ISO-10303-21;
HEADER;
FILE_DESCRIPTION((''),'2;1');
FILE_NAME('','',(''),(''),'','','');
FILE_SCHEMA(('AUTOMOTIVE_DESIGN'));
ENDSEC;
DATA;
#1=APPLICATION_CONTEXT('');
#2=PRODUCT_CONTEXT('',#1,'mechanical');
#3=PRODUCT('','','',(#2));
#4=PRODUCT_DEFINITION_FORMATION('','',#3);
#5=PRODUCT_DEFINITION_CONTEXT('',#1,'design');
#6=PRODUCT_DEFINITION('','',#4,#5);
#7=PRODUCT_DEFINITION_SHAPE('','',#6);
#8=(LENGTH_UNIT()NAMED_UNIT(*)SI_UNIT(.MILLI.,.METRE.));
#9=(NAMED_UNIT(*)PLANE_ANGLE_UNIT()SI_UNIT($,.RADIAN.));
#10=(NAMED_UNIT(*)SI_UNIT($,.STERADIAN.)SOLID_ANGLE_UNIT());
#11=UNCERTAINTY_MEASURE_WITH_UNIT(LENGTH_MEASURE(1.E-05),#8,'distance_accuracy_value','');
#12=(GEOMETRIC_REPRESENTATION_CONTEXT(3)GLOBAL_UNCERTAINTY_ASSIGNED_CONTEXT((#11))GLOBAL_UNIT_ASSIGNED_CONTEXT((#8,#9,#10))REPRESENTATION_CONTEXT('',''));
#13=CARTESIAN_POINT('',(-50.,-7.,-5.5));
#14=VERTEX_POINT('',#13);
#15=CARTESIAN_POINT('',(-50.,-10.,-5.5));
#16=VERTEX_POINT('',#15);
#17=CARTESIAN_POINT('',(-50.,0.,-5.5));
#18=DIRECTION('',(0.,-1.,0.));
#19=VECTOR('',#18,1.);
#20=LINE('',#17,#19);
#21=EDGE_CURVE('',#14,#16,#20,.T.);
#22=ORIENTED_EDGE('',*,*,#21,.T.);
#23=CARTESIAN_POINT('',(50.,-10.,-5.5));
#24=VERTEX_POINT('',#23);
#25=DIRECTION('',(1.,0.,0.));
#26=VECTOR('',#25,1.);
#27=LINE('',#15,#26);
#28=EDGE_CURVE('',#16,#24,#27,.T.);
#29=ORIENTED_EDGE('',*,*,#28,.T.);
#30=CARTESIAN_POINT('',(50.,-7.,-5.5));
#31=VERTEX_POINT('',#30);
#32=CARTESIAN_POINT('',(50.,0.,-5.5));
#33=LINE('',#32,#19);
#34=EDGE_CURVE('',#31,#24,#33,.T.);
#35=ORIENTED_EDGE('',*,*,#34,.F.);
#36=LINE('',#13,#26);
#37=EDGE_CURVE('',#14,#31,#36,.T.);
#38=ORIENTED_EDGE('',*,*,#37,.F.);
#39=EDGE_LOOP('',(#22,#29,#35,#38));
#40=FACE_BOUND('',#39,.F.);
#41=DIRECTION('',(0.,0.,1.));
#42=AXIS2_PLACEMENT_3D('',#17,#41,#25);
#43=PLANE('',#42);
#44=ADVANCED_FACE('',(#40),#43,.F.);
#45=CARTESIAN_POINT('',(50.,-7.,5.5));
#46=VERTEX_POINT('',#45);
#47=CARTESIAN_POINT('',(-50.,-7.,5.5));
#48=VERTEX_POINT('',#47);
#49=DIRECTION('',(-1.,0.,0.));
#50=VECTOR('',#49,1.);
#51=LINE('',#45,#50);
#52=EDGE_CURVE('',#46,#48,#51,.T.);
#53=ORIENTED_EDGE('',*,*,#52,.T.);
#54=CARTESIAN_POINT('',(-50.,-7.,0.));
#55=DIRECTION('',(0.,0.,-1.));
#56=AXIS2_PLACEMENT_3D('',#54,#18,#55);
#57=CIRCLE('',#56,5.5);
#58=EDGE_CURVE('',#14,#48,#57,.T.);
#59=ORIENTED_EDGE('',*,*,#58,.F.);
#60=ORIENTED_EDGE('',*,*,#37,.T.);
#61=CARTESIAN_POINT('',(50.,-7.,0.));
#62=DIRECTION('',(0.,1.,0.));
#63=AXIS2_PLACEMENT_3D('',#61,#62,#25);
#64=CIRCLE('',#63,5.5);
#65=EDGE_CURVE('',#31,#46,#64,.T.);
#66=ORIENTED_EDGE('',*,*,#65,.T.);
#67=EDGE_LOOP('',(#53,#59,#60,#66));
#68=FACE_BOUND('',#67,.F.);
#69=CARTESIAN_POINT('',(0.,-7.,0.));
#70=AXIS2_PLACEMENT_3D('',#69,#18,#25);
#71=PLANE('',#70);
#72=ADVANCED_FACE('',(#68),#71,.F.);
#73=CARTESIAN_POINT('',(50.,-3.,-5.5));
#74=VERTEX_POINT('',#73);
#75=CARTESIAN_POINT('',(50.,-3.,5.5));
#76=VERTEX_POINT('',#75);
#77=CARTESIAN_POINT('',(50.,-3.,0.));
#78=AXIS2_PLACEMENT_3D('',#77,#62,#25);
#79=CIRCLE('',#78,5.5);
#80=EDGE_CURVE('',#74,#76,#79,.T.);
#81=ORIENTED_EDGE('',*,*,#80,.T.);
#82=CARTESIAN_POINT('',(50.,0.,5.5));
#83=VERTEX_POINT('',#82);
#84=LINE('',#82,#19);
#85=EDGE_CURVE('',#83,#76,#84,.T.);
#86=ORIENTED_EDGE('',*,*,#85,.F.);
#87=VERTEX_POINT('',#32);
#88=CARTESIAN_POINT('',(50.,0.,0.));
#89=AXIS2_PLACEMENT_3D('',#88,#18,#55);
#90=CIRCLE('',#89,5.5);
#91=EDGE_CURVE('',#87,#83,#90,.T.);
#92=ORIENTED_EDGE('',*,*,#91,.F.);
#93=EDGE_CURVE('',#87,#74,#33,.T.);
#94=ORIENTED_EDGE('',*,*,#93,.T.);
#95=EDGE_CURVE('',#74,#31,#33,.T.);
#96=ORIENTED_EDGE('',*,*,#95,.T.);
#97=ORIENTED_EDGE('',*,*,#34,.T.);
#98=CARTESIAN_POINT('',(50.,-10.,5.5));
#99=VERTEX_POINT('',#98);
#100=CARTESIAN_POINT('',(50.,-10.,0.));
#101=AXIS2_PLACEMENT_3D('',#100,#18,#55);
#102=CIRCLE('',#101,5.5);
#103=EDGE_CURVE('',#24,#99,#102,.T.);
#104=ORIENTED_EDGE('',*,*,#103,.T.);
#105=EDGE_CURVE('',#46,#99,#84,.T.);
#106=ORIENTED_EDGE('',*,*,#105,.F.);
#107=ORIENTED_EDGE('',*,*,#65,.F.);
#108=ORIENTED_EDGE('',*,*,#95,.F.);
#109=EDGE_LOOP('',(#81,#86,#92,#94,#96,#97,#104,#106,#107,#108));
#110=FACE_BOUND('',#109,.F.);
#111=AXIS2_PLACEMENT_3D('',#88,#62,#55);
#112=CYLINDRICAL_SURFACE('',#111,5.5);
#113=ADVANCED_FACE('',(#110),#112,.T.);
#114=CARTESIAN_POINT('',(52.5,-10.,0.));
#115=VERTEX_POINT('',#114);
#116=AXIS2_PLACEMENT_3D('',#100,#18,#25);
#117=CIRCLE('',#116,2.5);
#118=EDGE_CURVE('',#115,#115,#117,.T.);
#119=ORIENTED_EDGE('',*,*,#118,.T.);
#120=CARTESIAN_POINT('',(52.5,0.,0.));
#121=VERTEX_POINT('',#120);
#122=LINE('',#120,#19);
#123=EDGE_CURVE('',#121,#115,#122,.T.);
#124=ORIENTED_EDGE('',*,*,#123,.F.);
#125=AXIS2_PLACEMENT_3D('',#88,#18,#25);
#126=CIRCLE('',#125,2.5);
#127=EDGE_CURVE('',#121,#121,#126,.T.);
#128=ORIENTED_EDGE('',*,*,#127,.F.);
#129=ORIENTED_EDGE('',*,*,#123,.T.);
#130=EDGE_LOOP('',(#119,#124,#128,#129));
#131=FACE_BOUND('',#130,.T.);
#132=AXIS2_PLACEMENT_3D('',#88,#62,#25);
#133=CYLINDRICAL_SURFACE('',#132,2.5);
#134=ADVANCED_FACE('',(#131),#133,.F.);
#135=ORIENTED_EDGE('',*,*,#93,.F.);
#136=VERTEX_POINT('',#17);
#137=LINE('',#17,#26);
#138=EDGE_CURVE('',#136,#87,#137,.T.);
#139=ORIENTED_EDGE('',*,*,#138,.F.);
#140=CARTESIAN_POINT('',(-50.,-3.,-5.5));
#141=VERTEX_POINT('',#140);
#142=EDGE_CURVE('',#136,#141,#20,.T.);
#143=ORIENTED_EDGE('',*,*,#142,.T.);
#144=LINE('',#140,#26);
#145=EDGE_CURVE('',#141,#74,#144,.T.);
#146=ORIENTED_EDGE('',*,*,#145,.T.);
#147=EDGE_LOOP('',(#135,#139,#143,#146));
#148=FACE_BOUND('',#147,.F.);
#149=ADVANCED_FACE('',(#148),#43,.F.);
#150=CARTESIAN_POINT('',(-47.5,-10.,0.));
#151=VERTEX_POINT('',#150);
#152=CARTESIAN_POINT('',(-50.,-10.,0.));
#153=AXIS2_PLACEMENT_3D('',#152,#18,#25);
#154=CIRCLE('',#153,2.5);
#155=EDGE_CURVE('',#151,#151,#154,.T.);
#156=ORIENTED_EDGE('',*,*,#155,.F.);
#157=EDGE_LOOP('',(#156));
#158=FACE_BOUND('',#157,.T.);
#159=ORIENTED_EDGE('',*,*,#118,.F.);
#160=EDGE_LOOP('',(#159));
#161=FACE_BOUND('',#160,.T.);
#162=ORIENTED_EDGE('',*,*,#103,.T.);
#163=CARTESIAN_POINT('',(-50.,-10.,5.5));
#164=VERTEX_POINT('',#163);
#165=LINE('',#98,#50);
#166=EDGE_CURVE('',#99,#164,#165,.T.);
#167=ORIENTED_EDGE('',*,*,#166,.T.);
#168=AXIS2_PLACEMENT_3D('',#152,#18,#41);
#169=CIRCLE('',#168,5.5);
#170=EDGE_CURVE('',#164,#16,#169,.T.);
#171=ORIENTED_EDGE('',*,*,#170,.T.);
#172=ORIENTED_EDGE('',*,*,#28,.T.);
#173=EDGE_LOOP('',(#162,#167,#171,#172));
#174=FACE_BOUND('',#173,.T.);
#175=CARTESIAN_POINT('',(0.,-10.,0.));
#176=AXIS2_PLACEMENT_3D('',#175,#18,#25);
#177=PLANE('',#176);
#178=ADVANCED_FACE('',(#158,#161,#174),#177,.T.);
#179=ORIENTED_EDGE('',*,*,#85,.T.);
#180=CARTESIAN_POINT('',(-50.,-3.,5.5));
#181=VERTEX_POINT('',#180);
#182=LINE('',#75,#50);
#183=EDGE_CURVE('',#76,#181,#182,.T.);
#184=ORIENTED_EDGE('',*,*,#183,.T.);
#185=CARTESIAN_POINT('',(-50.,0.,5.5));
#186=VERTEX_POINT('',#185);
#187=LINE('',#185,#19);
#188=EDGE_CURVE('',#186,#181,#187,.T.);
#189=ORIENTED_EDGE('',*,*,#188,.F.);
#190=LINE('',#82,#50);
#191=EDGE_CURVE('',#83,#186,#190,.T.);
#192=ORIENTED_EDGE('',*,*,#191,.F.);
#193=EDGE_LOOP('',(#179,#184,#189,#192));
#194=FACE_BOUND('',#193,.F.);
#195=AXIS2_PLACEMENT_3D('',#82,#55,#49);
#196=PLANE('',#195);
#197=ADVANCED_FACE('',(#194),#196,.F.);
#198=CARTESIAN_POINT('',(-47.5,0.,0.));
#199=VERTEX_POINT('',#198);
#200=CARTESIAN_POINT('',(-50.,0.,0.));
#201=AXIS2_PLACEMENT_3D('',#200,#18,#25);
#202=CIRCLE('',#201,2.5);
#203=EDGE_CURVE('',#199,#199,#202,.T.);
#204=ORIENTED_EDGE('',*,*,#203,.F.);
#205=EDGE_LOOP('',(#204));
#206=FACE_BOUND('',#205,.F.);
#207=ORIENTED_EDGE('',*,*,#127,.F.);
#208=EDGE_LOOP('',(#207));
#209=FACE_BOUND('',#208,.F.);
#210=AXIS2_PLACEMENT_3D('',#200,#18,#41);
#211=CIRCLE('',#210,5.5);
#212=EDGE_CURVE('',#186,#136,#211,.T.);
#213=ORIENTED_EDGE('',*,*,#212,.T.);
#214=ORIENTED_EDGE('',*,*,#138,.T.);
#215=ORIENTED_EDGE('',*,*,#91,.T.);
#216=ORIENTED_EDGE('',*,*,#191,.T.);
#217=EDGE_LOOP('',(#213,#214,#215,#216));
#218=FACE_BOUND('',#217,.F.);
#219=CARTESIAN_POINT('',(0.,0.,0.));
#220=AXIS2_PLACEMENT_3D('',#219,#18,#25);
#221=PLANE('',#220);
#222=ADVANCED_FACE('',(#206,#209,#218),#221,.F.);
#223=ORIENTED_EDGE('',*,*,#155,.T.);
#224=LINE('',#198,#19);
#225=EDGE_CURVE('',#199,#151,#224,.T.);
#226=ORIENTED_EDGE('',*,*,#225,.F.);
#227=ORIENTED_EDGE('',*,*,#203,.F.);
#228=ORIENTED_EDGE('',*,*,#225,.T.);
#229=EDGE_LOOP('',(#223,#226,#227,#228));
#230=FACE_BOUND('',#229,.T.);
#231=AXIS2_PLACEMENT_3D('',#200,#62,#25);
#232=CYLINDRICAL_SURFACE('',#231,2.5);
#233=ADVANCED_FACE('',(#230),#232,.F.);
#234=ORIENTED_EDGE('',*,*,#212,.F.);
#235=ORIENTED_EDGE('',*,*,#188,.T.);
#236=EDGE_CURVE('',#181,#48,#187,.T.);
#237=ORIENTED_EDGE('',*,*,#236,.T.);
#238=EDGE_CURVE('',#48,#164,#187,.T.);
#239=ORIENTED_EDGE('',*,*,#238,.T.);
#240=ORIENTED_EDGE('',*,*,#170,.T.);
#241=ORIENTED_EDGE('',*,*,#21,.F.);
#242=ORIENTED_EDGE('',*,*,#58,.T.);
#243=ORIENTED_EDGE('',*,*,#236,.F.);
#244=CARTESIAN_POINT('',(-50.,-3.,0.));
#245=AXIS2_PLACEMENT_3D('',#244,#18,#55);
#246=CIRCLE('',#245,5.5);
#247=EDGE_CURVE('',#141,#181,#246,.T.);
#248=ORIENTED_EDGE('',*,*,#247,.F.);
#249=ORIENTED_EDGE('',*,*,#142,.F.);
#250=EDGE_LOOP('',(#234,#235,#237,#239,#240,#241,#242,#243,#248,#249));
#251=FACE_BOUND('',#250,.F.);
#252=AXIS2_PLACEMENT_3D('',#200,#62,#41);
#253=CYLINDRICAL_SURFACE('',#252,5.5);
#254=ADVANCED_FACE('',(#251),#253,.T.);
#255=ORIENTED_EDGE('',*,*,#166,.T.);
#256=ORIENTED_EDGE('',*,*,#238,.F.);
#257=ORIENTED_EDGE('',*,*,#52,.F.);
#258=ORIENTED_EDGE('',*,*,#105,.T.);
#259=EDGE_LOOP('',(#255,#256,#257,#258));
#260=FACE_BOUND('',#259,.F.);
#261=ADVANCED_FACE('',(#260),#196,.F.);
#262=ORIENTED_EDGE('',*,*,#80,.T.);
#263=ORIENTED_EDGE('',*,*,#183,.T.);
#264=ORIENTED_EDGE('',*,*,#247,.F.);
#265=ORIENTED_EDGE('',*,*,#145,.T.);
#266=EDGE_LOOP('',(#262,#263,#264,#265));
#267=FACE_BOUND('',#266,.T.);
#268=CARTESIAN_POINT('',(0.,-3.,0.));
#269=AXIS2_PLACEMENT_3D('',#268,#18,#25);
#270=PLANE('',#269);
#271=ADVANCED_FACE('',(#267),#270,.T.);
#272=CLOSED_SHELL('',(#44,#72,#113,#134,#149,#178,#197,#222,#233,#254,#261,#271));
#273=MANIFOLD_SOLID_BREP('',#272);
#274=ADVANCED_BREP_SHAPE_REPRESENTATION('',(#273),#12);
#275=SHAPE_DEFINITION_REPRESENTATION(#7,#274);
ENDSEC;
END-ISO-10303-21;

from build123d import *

# Parameters (mm, degrees)
F0_R     = 2.5
F1_DEPTH = 10
F2_T     = 3


# Not quite as in the source:
# - a shell that OpenCascade refuses in one call is made with other operations: the cavity is built on its own and cut out


with BuildPart() as f1:
    # F0 (on Front) → F1 (new body)
    with BuildSketch(Plane.XZ):
        with BuildLine():
            Line((0, 5.5), (-50, 5.5))
            ThreePointArc((-50, 5.5), (-55.5, 0), (-50, -5.5))
            Line((-50, -5.5), (0, -5.5))
            Line((0, -5.5), (50, -5.5))
            ThreePointArc((50, -5.5), (55.5, 0), (50, 5.5))
            Line((50, 5.5), (0, 5.5))
        make_face()
        with Locations((-50, 0)):
            Circle(F0_R, mode=Mode.SUBTRACT)
        with Locations((50, 0)):
            Circle(F0_R, mode=Mode.SUBTRACT)
    extrude(amount=F1_DEPTH)

    # F2: shell of thickness 3, made by hand


with BuildPart() as f2_core1:
    # F2_t2: copy of F1
    add(f1.part)

    # the walls: a layer under each face that stays
    f2_faces = [f2_core1.faces().sort_by_distance(p)[0] for p in [
        (0, -10, 0),
        (47.5, -5, 0),
        (-52.5, -5, 0),
        (55.5, -5, 0),
        (0, 0, 0),
        (-55.5, -5, 0),
    ]]
    thicken(f2_faces, amount=-F2_T, mode=Mode.SUBTRACT)


with BuildPart() as f1_1:
    add(f1.part)

    # what is left inside the walls is the cavity
    f2_cavity = [f2_core1.part.solids().sort_by_distance(p)[0] for p in [
        (0, -3.03, -1.833333),
    ]]
    add(f2_cavity, mode=Mode.SUBTRACT)


solid = f1_1.part
